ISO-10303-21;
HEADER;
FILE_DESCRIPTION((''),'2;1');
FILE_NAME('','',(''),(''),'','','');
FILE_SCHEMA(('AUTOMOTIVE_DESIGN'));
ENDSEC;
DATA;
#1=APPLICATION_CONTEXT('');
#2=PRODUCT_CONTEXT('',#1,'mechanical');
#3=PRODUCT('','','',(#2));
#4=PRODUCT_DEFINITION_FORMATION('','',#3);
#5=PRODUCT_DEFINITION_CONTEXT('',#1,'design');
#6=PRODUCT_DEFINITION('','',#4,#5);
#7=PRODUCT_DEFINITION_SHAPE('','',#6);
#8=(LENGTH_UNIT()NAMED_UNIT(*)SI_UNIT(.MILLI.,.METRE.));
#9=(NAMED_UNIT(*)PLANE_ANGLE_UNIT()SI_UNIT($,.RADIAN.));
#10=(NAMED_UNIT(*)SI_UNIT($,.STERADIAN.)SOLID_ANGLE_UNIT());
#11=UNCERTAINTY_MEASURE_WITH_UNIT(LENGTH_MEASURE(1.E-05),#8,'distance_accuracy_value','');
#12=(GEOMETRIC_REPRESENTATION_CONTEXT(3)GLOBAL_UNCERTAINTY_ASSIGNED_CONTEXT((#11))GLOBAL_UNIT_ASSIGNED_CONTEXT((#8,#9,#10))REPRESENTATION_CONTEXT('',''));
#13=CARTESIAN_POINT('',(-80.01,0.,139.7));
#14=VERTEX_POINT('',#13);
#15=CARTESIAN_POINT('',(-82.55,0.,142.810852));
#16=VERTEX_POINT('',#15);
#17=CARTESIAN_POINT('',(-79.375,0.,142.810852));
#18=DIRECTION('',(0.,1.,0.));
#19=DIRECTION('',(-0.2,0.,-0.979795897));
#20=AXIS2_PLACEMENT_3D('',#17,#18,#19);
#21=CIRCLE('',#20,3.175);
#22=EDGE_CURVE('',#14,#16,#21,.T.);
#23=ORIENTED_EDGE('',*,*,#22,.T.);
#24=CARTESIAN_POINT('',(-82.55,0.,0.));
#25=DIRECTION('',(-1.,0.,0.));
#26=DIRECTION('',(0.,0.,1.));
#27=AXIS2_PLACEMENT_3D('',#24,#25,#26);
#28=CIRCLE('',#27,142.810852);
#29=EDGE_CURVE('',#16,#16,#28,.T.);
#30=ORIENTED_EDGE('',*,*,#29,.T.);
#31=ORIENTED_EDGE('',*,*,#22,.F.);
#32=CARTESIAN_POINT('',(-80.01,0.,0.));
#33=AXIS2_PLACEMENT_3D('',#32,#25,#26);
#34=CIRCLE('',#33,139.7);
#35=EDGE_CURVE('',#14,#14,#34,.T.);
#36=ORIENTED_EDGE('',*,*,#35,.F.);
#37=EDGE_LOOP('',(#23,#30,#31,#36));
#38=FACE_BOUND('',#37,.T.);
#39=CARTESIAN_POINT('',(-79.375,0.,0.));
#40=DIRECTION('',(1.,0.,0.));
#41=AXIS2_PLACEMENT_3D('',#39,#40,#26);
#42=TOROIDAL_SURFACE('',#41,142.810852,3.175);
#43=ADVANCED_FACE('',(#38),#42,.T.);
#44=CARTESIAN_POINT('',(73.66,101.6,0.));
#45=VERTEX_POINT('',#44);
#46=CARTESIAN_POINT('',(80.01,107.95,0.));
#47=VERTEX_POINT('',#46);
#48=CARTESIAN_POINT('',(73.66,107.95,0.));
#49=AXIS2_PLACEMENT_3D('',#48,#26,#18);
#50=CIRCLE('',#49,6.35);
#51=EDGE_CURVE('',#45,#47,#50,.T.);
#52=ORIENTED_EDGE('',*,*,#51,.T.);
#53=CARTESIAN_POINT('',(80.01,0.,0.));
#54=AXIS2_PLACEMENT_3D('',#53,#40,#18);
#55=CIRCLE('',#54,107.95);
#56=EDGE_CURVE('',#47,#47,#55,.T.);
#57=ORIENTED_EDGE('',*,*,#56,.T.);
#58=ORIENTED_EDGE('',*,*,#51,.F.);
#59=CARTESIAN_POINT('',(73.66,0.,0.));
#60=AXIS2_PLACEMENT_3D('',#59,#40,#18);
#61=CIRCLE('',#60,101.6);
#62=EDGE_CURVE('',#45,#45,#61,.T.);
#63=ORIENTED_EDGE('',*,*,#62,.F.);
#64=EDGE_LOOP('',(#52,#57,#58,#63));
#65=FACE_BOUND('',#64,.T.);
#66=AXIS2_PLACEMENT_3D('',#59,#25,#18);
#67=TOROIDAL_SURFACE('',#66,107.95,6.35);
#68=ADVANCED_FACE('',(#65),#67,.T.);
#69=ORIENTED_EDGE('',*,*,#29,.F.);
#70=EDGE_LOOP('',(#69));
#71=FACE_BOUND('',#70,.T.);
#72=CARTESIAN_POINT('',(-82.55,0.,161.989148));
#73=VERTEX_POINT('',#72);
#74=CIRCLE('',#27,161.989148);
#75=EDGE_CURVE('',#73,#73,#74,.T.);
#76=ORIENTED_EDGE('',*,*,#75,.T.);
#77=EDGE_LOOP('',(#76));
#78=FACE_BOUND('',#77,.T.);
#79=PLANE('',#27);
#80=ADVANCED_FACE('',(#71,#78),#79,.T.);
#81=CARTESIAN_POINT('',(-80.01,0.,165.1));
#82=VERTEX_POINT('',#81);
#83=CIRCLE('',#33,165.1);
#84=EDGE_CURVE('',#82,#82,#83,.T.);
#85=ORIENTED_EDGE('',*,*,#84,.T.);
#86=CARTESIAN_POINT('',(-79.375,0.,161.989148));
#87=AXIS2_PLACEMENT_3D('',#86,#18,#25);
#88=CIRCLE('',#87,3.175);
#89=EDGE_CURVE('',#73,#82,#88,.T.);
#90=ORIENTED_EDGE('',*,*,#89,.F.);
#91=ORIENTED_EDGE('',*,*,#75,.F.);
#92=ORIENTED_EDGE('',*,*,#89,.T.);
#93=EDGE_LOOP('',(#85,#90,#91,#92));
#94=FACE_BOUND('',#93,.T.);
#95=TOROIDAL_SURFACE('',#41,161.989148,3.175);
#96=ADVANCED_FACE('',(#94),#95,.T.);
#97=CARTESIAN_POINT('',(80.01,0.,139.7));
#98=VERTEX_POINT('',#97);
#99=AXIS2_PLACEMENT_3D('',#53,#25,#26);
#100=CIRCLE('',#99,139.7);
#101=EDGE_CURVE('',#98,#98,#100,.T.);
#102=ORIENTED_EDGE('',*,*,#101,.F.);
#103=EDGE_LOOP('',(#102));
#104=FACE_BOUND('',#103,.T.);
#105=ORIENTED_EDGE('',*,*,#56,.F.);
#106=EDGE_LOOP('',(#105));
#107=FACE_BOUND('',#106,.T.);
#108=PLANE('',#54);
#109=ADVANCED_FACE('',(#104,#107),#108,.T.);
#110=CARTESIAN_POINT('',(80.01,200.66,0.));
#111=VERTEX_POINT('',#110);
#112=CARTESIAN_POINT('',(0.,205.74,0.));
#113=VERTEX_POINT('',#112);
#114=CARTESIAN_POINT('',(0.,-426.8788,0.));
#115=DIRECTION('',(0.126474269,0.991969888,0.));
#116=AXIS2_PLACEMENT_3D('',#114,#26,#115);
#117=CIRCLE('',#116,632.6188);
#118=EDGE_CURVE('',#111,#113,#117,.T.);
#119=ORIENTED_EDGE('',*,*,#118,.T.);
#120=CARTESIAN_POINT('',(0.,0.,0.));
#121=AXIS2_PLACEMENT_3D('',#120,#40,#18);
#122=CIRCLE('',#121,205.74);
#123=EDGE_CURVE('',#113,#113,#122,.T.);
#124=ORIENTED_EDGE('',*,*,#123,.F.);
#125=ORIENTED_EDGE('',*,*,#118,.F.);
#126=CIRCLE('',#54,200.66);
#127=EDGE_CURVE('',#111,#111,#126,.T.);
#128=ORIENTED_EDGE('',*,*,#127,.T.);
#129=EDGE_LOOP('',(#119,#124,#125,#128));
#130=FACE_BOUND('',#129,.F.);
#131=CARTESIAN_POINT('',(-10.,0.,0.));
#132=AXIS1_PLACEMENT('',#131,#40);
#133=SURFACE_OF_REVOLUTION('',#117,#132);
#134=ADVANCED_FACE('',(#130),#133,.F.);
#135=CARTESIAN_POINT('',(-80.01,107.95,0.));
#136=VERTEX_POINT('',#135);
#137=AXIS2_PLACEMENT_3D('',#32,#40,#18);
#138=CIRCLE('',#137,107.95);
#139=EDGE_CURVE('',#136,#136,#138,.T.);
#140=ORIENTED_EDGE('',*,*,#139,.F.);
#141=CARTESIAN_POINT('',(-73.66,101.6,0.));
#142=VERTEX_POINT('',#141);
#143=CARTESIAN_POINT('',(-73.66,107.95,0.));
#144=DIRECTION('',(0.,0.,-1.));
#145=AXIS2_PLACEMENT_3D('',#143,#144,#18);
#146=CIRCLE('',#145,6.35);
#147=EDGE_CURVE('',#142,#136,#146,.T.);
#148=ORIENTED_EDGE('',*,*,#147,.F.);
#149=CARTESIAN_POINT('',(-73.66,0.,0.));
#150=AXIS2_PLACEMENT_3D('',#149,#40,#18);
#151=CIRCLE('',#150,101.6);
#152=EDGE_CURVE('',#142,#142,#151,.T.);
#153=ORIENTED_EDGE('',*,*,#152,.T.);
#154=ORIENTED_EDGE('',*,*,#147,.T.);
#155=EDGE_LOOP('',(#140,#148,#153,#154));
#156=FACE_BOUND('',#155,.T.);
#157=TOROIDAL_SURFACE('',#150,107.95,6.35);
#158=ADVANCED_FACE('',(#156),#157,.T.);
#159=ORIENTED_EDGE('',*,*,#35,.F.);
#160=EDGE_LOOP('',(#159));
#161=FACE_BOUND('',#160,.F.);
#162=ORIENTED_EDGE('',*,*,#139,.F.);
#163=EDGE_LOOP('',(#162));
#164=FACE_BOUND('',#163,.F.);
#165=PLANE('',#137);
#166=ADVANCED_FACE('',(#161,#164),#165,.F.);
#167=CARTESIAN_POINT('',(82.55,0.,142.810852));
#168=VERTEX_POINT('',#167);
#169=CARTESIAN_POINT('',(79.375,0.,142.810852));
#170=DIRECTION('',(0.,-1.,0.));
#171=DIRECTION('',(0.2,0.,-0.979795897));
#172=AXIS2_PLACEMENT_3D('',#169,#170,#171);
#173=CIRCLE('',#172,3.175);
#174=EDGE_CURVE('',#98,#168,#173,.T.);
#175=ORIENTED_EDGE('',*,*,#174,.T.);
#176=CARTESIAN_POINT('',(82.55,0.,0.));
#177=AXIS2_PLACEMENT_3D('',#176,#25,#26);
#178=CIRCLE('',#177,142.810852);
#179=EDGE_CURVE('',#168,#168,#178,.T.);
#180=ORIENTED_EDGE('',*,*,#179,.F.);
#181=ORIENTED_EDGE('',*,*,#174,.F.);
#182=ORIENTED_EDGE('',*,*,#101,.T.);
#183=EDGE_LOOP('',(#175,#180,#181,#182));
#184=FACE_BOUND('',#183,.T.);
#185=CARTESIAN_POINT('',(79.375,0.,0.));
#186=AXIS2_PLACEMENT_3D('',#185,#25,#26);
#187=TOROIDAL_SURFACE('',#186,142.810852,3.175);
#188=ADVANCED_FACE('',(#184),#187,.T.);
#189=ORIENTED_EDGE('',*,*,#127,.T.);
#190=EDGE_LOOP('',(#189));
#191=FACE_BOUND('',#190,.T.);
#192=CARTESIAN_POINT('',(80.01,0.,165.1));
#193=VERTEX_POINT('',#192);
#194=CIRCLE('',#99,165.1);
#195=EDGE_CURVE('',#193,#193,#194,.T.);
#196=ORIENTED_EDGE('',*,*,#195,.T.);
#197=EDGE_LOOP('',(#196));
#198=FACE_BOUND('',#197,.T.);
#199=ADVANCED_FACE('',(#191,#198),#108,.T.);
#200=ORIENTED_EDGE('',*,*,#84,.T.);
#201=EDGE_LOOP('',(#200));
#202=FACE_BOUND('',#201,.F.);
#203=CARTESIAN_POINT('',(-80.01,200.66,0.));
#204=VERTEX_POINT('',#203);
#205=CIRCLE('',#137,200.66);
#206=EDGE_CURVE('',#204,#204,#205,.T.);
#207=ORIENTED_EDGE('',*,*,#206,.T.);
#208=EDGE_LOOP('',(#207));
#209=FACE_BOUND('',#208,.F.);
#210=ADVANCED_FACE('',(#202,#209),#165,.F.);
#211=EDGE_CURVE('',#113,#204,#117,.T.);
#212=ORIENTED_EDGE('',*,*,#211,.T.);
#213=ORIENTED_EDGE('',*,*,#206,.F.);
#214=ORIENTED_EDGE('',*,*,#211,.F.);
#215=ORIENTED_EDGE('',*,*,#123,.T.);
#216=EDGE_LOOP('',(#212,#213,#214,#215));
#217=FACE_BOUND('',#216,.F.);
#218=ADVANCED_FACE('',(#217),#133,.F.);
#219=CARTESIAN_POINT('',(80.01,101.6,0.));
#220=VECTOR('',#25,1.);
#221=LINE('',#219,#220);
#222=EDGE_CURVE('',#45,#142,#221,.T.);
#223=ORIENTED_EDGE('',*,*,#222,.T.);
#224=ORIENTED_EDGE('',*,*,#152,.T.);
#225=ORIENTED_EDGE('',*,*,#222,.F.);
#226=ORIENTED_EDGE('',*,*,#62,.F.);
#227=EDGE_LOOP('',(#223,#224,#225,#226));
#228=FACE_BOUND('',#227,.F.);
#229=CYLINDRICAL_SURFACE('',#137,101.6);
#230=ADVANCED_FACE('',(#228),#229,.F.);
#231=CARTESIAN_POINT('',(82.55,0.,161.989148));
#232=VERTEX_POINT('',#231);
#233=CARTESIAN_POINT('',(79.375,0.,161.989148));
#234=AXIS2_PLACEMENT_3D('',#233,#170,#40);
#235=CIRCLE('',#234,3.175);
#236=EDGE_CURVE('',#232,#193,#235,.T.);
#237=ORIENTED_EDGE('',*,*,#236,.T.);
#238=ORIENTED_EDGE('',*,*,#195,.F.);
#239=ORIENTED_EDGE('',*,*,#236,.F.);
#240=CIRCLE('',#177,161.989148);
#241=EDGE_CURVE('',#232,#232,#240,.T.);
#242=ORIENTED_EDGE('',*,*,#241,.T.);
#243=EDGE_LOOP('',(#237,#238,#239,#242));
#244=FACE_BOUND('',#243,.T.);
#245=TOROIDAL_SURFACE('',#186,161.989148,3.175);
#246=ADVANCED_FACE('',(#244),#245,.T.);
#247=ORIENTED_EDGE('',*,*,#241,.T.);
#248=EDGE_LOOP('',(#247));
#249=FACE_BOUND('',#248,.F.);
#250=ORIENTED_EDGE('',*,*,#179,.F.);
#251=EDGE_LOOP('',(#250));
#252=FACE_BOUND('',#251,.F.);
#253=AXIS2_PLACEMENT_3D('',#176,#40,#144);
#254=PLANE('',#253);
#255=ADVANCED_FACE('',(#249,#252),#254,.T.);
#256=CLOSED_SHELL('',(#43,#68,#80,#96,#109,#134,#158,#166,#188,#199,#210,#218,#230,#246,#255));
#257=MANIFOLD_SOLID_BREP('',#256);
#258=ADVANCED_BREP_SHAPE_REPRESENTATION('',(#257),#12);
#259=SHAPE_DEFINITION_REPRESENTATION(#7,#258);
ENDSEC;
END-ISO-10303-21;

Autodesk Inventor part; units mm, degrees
ref_plane "YZ Plane" through (0, 0, 0) normal (1, 0, 0) x (0, 1, 0)
ref_plane "XZ Plane" through (0, 0, 0) normal (0, 1, 0) x (-1, 0, 0)
ref_plane "XY Plane" through (0, 0, 0) normal (0, 0, 1) x (1, 0, 0)
sketch "Sketch3" plane through (0, 0, 0) normal (0, 0, 1) x (1, 0, 0)
  line L0 (-112.014, 0) -> (112.014, 0) projected
  line L1 (0, -553.4025) -> (0, 332.2638) projected
  line L2 (-61.2196, 205.74) -> (61.2196, 205.74) construction
  line L3 (-80.01, 200.66) -> (80.01, 200.66) construction
  line L4 (-80.01, 101.6) -> (80.01, 101.6)
  line L5 (-80.01, 200.66) -> (-80.01, 101.6)
  line L6 (80.01, 200.66) -> (80.01, 101.6)
  arc A0 (80.01, 200.66) -> (-80.01, 200.66) centre (0, -426.8788) ccw
  point P0 (0, 0)
  point P1 (0, 205.74)
  point P2 (0, 200.66)
  dimension "d13" = 5.08
  dimension "d14" = 160.02
  dimension "d15" = 205.74
  dimension "d16" = 101.6
revolve "Revolution1" add sketch "Sketch3" angle 360 about axis through (-10, 0, 0) along (1, 0, 0)
sketch "Sketch4" plane through (-80.01, 0, 0) normal (-1, 0, 0) x (0, 0, 1)
  circle A0 centre (0, 0) radius 101.6 projected
  circle A1 centre (0, 0) radius 139.7
  circle A2 centre (0, 0) radius 165.1
  dimension "d18" = 279.4
  dimension "d19" = 330.2
extrude "Extrusion3" add sketch "Sketch4" along normal blind 2.54 contours A2
mirror "Mirror2" about plane through (0, 0, 0) normal (1, 0, 0) of "Extrusion3"
fillet "Fillet3" radius 3.175 4 edges at (-82.55, 0, -165.1) (-82.55, 0, -139.7) (82.55, 0, -139.7) (82.55, 0, -165.1)
fillet "Fillet4" radius 6.35 2 edges at (80.01, -101.6, 0) (-80.01, -101.6, 0)
properties part number "tire 16.2 od"
